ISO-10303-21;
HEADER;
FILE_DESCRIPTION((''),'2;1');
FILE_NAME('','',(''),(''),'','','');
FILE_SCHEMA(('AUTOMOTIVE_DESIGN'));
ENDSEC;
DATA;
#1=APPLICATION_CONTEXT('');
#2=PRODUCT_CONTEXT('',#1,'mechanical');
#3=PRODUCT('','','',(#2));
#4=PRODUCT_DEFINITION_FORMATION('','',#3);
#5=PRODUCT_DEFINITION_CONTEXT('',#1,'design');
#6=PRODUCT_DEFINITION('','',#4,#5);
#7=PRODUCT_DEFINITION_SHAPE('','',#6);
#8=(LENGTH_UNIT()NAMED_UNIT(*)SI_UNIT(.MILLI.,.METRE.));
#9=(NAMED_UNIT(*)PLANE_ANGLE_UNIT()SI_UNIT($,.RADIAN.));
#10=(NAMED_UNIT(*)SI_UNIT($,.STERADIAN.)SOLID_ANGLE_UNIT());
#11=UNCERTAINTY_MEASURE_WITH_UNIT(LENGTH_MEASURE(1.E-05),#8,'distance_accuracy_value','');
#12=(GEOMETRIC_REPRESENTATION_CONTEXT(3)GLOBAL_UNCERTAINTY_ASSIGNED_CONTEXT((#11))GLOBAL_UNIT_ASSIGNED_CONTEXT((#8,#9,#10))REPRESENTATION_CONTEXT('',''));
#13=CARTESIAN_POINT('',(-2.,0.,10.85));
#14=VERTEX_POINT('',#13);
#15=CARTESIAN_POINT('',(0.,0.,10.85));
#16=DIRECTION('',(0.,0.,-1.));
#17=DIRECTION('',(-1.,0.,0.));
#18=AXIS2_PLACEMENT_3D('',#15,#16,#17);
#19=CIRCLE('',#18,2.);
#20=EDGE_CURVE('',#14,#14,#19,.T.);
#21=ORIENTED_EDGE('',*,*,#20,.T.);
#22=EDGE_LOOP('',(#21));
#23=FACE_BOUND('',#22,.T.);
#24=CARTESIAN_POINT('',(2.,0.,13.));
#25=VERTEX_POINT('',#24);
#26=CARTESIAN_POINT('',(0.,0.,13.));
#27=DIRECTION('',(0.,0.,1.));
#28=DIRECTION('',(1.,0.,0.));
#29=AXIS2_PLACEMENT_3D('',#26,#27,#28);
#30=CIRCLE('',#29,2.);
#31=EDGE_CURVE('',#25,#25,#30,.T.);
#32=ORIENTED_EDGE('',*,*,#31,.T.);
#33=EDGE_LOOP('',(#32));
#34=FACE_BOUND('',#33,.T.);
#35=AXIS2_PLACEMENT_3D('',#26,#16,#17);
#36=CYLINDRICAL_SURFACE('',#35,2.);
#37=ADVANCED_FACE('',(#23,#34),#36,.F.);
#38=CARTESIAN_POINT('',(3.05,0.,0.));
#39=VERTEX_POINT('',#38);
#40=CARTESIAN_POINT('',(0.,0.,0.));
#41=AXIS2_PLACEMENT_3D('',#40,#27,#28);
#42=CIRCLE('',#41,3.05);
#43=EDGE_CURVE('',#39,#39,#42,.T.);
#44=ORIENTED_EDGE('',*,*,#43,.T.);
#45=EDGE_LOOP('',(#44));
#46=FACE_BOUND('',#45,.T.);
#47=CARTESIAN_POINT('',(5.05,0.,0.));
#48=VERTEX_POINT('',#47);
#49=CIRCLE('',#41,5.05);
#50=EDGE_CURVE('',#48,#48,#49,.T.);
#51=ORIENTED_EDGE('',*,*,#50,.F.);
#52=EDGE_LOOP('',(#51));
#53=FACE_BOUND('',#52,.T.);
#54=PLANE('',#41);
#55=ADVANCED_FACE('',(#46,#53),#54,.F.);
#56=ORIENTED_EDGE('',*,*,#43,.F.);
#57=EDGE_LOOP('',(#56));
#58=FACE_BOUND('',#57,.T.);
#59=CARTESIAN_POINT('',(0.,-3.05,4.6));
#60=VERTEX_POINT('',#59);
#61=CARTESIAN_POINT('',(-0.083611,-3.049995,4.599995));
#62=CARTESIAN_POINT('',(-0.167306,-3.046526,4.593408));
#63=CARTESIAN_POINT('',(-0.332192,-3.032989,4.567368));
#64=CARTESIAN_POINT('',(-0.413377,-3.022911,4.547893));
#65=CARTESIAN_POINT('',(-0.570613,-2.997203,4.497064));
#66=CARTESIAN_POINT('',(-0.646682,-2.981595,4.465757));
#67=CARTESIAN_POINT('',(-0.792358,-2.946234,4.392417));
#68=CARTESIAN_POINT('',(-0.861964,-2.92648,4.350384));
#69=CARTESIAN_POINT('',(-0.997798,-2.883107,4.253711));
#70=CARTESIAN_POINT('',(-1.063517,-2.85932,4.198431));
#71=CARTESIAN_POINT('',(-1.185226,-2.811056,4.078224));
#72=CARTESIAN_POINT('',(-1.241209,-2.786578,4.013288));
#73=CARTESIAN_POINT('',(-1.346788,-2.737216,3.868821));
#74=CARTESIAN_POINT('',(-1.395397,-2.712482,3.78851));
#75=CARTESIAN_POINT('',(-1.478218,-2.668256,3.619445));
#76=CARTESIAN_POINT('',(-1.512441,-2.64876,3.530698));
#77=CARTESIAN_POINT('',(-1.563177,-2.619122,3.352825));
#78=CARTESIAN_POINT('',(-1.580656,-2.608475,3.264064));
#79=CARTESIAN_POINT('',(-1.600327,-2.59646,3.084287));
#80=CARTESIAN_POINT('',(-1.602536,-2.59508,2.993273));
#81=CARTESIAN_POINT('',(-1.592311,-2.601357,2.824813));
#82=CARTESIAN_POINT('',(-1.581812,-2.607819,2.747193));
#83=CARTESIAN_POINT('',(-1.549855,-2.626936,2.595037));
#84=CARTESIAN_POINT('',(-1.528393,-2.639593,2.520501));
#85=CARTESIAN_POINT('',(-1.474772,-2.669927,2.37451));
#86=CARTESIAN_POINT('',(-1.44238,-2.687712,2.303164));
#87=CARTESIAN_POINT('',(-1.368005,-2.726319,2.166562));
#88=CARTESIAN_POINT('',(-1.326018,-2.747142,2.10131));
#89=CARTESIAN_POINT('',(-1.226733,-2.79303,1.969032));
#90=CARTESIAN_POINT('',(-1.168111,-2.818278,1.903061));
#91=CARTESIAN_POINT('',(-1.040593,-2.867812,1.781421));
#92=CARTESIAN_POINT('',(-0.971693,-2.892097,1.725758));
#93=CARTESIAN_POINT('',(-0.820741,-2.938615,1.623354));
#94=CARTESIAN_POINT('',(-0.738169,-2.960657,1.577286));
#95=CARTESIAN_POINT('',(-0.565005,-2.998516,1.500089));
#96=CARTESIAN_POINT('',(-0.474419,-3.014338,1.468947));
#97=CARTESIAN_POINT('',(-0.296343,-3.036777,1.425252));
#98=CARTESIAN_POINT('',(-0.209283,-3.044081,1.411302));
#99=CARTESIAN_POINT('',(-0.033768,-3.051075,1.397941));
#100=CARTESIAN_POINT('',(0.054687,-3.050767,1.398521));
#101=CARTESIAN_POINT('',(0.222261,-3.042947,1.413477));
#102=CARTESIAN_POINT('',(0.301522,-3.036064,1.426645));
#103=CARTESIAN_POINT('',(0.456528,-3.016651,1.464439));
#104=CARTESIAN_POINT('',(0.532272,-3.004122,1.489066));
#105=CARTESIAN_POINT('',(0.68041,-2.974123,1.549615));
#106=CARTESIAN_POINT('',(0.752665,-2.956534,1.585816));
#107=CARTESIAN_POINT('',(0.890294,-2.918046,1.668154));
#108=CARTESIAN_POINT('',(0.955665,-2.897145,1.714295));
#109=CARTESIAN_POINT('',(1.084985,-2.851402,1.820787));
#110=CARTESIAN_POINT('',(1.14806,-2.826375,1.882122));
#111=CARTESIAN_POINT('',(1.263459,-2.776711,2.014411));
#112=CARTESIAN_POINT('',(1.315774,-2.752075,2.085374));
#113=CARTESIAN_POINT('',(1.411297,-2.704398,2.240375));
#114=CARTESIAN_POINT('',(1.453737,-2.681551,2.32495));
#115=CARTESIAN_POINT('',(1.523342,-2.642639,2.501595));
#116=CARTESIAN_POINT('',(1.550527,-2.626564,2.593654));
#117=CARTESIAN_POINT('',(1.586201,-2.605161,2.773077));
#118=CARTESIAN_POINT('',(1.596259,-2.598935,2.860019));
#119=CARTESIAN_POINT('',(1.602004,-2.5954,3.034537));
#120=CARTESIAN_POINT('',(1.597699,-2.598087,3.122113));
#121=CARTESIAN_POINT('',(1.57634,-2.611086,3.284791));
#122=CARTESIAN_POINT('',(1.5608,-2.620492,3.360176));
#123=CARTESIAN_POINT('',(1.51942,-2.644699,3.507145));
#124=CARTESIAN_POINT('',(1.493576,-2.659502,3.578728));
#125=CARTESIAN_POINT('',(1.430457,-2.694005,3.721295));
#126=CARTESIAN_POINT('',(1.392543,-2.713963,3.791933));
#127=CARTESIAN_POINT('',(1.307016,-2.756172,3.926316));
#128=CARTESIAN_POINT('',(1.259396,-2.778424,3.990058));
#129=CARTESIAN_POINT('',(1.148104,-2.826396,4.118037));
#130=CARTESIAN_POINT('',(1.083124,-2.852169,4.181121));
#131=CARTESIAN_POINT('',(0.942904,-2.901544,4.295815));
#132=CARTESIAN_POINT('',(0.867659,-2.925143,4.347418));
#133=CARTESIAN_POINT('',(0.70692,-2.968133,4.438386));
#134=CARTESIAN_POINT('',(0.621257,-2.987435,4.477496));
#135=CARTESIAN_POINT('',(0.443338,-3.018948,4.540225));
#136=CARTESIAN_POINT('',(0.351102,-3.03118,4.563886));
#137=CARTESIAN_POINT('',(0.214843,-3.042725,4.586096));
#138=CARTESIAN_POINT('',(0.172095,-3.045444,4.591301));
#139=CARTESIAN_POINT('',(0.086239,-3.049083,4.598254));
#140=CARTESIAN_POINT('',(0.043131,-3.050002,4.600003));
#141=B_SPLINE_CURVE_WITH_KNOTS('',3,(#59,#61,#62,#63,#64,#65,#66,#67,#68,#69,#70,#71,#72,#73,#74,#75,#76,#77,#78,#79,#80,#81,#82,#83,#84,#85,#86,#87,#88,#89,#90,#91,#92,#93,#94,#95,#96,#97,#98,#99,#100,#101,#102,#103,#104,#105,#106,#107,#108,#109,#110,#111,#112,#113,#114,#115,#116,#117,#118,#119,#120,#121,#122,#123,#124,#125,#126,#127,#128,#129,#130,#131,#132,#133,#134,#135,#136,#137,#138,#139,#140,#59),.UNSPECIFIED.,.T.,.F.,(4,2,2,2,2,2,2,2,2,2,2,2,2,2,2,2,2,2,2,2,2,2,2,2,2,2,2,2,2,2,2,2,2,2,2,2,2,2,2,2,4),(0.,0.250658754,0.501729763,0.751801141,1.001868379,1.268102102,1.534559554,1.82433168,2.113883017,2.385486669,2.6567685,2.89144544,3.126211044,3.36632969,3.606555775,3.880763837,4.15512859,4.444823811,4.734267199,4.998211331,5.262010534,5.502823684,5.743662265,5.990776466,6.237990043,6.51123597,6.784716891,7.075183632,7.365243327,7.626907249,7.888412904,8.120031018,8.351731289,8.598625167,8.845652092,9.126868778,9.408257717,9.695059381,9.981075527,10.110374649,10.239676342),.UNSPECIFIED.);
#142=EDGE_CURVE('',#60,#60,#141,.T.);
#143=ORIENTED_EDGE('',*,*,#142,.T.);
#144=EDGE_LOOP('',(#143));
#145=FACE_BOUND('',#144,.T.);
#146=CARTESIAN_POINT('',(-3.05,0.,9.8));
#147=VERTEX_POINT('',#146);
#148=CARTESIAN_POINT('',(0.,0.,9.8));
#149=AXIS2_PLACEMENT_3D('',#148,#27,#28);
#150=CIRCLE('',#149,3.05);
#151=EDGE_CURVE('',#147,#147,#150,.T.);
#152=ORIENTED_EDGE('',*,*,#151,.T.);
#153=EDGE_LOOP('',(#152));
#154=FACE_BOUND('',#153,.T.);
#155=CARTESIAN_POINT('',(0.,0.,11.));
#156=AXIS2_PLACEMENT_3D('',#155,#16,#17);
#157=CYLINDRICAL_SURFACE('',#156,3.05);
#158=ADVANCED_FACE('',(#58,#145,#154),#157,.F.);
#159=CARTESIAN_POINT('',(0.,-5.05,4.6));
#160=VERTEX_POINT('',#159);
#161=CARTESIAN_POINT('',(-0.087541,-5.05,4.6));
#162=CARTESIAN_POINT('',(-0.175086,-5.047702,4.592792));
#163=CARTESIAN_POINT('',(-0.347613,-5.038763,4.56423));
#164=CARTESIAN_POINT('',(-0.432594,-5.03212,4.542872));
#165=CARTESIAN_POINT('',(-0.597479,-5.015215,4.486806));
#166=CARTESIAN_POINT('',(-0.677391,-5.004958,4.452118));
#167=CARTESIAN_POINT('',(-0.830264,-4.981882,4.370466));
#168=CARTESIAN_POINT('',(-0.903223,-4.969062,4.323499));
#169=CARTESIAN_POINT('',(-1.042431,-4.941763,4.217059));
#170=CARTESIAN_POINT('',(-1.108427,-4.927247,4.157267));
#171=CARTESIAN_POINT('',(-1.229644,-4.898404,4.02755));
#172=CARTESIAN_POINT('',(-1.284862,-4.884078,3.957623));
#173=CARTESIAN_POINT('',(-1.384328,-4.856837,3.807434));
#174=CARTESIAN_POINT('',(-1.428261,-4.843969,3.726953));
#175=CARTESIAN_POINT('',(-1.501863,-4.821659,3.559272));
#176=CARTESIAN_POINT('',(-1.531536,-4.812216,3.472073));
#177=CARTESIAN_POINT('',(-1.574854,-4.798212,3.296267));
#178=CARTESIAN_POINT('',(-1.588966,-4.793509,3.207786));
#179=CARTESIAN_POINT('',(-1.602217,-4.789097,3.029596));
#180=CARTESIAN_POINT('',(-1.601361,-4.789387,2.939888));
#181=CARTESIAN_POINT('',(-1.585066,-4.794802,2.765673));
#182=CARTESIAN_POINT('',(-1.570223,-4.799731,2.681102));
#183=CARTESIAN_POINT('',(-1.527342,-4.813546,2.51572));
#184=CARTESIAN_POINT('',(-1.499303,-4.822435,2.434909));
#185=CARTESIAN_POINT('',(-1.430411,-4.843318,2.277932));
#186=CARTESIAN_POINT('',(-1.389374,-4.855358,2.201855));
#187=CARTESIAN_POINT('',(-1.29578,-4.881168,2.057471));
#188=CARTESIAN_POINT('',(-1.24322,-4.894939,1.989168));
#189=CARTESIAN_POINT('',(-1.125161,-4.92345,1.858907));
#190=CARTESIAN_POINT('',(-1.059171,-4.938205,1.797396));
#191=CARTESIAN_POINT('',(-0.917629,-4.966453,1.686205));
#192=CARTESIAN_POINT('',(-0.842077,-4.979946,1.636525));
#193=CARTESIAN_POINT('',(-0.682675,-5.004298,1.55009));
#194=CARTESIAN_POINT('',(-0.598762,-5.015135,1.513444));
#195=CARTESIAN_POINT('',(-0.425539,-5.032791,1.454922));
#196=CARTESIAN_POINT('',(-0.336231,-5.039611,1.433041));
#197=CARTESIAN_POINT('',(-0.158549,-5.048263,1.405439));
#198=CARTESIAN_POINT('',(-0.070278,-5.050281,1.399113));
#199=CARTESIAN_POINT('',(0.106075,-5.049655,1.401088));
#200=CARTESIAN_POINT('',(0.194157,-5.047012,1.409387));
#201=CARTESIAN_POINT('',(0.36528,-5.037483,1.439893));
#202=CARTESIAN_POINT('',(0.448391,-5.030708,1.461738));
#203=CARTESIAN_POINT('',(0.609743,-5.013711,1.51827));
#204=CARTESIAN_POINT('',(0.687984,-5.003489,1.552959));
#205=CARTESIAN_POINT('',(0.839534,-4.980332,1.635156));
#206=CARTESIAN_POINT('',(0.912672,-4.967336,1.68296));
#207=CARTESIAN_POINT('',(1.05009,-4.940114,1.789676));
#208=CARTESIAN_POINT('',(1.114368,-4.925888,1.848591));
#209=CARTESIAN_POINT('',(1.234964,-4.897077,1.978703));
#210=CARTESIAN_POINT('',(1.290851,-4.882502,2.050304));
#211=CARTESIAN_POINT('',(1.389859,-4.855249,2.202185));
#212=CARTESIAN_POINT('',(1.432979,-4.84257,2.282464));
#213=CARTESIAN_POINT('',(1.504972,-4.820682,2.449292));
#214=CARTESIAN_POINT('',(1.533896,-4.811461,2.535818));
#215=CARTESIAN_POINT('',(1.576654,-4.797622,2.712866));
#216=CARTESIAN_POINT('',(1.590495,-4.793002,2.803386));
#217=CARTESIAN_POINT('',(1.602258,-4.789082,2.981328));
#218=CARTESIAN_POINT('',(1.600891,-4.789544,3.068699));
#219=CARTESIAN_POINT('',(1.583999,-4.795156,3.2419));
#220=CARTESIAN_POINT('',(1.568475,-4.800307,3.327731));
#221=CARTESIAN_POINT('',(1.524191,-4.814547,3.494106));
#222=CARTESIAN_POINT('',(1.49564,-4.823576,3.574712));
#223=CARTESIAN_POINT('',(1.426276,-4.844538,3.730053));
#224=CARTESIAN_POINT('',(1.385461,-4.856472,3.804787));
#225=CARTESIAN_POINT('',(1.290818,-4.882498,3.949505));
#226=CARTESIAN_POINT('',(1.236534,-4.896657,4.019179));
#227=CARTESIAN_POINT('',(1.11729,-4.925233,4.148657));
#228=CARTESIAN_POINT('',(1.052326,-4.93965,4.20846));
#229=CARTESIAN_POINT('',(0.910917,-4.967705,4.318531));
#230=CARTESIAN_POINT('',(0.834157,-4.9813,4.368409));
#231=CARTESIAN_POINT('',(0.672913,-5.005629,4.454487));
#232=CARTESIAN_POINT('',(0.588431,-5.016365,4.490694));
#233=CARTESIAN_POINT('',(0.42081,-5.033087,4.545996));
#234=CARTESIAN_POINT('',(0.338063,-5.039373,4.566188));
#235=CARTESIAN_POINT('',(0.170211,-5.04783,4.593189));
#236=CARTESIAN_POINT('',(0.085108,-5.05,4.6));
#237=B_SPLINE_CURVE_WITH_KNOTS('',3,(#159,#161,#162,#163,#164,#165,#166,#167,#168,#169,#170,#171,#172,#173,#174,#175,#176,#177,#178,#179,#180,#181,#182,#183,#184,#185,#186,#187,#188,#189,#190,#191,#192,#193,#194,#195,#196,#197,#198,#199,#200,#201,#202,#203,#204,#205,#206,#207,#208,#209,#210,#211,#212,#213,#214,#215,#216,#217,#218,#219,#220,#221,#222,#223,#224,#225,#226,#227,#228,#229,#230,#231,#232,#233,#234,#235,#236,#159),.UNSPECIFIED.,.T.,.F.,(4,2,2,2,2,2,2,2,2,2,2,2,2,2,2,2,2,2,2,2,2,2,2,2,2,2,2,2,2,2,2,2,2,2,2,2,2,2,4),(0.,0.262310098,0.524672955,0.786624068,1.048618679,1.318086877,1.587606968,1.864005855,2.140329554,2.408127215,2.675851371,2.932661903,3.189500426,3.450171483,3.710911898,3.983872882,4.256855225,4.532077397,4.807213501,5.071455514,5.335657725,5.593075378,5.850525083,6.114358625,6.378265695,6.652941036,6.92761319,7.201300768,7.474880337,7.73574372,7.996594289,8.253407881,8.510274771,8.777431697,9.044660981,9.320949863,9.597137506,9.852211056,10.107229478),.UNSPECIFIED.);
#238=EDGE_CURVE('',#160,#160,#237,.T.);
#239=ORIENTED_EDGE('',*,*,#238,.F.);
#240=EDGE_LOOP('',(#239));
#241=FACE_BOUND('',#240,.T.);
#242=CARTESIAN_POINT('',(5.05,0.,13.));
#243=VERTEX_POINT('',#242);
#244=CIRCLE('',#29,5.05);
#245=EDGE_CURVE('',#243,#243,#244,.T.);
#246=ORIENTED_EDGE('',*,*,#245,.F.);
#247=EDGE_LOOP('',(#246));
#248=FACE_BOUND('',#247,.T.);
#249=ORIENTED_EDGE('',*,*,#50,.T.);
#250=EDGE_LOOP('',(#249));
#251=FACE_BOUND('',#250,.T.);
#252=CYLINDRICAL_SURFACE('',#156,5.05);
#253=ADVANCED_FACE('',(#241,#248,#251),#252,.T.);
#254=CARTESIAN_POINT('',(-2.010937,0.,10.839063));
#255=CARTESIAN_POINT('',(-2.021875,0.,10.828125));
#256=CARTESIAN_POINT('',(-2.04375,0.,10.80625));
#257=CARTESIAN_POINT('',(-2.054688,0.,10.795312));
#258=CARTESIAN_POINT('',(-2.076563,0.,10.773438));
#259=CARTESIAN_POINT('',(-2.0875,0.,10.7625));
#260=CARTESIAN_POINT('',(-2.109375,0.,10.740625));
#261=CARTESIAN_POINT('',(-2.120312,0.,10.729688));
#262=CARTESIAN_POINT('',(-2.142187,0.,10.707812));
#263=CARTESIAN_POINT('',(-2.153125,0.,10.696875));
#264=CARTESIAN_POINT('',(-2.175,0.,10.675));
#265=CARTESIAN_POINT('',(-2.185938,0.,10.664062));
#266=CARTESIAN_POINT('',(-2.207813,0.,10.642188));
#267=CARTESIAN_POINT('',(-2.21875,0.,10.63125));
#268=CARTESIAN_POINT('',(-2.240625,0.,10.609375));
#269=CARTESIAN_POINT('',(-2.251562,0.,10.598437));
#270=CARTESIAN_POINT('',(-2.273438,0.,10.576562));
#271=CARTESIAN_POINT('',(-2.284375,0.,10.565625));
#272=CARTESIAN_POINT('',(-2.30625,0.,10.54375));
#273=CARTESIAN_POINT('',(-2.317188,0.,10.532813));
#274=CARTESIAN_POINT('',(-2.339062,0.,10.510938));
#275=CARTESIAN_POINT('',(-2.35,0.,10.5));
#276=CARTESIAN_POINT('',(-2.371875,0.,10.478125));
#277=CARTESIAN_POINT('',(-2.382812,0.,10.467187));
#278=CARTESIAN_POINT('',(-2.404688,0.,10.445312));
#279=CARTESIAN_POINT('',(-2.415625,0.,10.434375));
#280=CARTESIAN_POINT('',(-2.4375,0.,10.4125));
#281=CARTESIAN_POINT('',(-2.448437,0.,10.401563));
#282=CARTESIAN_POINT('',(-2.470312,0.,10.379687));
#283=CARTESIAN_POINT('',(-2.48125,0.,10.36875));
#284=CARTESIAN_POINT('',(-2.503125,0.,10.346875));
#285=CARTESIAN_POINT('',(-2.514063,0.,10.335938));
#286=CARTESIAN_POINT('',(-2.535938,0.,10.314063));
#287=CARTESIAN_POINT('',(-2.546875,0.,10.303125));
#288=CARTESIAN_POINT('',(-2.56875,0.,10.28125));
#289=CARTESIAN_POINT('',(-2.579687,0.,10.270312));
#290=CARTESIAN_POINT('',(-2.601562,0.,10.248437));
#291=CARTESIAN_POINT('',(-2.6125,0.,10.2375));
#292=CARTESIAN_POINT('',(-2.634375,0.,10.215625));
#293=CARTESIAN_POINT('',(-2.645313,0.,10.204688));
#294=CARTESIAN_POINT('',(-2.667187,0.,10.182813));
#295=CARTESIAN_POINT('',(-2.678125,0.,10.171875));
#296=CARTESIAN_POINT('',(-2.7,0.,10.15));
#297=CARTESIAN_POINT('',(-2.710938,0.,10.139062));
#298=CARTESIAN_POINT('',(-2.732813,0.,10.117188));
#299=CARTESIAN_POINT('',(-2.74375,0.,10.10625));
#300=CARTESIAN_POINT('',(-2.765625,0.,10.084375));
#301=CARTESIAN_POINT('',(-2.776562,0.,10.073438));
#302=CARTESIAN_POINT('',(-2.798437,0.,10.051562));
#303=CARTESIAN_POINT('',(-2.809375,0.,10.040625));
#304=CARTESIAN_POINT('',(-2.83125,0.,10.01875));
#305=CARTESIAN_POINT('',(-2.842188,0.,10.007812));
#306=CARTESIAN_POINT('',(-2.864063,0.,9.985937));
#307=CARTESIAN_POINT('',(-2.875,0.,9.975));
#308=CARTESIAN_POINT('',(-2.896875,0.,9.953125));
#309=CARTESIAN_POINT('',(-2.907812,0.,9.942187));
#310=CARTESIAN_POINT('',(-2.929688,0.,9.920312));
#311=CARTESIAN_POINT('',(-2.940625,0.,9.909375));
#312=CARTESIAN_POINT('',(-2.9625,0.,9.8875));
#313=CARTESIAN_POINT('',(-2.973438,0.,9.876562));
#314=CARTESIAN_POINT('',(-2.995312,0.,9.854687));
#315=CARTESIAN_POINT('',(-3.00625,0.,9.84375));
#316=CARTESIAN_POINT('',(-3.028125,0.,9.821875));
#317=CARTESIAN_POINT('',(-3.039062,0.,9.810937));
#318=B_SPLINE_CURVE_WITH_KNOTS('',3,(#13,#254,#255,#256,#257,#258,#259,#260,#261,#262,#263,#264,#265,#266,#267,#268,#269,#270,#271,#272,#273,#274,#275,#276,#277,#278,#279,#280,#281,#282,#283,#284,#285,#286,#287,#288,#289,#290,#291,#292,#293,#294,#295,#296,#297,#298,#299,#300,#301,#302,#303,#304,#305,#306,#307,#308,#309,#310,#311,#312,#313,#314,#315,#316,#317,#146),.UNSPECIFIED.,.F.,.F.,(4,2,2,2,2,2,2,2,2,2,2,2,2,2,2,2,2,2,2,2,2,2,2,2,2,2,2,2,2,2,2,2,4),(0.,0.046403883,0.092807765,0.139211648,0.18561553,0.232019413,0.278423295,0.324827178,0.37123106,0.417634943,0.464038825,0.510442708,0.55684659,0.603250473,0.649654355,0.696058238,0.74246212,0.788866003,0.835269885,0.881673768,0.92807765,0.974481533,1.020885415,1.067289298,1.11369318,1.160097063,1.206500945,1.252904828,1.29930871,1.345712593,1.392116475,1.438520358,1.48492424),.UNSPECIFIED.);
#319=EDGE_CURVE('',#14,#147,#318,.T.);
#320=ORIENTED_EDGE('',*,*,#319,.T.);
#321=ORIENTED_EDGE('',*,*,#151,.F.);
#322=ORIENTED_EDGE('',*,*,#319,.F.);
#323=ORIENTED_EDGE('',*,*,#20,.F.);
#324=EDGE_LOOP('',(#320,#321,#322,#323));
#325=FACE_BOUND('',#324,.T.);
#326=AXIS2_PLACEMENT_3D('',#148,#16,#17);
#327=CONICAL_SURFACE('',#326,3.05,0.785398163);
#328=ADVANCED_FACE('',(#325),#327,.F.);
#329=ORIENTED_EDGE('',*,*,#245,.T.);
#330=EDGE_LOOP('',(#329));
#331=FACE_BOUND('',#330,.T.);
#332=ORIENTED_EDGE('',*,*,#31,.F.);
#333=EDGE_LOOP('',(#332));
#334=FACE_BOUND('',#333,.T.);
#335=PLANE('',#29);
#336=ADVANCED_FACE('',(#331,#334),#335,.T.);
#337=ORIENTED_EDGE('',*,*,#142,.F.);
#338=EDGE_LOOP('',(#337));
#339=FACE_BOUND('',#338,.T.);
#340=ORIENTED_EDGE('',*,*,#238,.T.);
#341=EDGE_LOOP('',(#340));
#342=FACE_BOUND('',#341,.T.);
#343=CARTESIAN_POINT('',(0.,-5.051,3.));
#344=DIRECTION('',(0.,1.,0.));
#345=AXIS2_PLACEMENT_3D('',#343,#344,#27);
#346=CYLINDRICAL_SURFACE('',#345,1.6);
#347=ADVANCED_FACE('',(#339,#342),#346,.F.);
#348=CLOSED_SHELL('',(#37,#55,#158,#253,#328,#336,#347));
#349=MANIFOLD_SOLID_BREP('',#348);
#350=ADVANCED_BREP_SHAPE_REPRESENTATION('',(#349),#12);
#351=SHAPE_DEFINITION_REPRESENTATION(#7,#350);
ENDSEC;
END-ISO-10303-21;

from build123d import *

# Parameters (mm, degrees)
SKETCH1_R               = 5.05
SKETCH1_R_2             = 3.05
BOSS_EXTRUDE1_DEPTH     = 11
BOSS_EXTRUDE2_START     = 11
SKETCH1_3_R             = 5.05
SKETCH1_3_R_2           = 3.05
SKETCH1_3_R_3           = 2
BOSS_EXTRUDE2_DEPTH     = 2
CUT_EXTRUDE1_REACH      = 16.833
CUT_EXTRUDE1_END_RADIUS = 5.05
SKETCH2_R               = 1.6
CHAMFER1_SIZE           = 1.2


with BuildPart() as part:
    # Sketch1 → Boss-Extrude1 (new body)
    with BuildSketch(Plane(origin=(0, 0, 0), x_dir=(0, 1, 0), z_dir=(0, 0, 1))):
        with Locations(Location((0, 0, 0), (0, 0, 270))):
            Circle(SKETCH1_R)
        with Locations(Location((0, 0, 0), (0, 0, 270))):
            Circle(SKETCH1_R_2, mode=Mode.SUBTRACT)
    extrude(amount=BOSS_EXTRUDE1_DEPTH)

    # Sketch1<3> → Boss-Extrude2 (add)
    # profile 1 of 2: a face of its own
    with BuildSketch(Plane(origin=(0, 0, 0), x_dir=(0, 1, 0), z_dir=(0, 0, 1)).offset(BOSS_EXTRUDE2_START)):
        with Locations(Location((0, 0, 0), (0, 0, 270))):
            Circle(SKETCH1_3_R)
        with Locations(Location((0, 0, 0), (0, 0, 270))):
            Circle(SKETCH1_3_R_2, mode=Mode.SUBTRACT)
    # profile 2 of 2: a face of its own
    with BuildSketch(Plane(origin=(0, 0, 0), x_dir=(0, 1, 0), z_dir=(0, 0, 1)).offset(BOSS_EXTRUDE2_START)):
        with Locations(Location((0, 0, 0), (0, 0, 270))):
            Circle(SKETCH1_3_R_2)
        with Locations(Location((0, 0, 0), (0, 0, 270))):
            Circle(SKETCH1_3_R_3, mode=Mode.SUBTRACT)
    extrude(amount=BOSS_EXTRUDE2_DEPTH)

    # Cut-Extrude1: up to this cylinder (the profile starts inside it)
    cut_extrude1_end = Plane(origin=(0, 0, 3), z_dir=(0, 0, -1)) * Cylinder(CUT_EXTRUDE1_END_RADIUS, 44.766, mode=Mode.PRIVATE)
    # Sketch2 → Cut-Extrude1 (cut, up to the surface)
    with BuildSketch(Plane(origin=(0, 0, 0), x_dir=(-1, 0, 0), z_dir=(0, 1, 0)), mode=Mode.PRIVATE) as cut_extrude1_sk1:
        with Locations(Location((0, 3, 0), (0, 0, 90))):
            Circle(SKETCH2_R)
    cut_extrude1_tool1 = extrude(cut_extrude1_sk1.sketch, amount=-CUT_EXTRUDE1_REACH, mode=Mode.PRIVATE) & cut_extrude1_end
    add(cut_extrude1_tool1.solids().sort_by_distance((0, 0, 3))[0], mode=Mode.SUBTRACT)

    # Chamfer1
    # the kernel refuses this chamfer: 1.2 mm, written as the material it adds along each edge
    with BuildSketch(Plane(origin=(0, 0, 11), x_dir=(1, 0, 0), z_dir=(0, -1, 0))) as chamfer1_piece_1_section:
        Polygon((3.05, -CHAMFER1_SIZE), (3.05 - CHAMFER1_SIZE, 0), (3.05, 0), align=None)
    chamfer1_piece_1 = revolve(axis=Axis((0, 0, 11), (0, 0, 1)), mode=Mode.PRIVATE)
    chamfer1_piece_1 = chamfer1_piece_1 - Plane(origin=(0, 0, 10.324643315), x_dir=(1, 0, 0), z_dir=(0, 0, -1)) * Cylinder(2, 13, mode=Mode.PRIVATE)
    add(chamfer1_piece_1)


solid = part.part
